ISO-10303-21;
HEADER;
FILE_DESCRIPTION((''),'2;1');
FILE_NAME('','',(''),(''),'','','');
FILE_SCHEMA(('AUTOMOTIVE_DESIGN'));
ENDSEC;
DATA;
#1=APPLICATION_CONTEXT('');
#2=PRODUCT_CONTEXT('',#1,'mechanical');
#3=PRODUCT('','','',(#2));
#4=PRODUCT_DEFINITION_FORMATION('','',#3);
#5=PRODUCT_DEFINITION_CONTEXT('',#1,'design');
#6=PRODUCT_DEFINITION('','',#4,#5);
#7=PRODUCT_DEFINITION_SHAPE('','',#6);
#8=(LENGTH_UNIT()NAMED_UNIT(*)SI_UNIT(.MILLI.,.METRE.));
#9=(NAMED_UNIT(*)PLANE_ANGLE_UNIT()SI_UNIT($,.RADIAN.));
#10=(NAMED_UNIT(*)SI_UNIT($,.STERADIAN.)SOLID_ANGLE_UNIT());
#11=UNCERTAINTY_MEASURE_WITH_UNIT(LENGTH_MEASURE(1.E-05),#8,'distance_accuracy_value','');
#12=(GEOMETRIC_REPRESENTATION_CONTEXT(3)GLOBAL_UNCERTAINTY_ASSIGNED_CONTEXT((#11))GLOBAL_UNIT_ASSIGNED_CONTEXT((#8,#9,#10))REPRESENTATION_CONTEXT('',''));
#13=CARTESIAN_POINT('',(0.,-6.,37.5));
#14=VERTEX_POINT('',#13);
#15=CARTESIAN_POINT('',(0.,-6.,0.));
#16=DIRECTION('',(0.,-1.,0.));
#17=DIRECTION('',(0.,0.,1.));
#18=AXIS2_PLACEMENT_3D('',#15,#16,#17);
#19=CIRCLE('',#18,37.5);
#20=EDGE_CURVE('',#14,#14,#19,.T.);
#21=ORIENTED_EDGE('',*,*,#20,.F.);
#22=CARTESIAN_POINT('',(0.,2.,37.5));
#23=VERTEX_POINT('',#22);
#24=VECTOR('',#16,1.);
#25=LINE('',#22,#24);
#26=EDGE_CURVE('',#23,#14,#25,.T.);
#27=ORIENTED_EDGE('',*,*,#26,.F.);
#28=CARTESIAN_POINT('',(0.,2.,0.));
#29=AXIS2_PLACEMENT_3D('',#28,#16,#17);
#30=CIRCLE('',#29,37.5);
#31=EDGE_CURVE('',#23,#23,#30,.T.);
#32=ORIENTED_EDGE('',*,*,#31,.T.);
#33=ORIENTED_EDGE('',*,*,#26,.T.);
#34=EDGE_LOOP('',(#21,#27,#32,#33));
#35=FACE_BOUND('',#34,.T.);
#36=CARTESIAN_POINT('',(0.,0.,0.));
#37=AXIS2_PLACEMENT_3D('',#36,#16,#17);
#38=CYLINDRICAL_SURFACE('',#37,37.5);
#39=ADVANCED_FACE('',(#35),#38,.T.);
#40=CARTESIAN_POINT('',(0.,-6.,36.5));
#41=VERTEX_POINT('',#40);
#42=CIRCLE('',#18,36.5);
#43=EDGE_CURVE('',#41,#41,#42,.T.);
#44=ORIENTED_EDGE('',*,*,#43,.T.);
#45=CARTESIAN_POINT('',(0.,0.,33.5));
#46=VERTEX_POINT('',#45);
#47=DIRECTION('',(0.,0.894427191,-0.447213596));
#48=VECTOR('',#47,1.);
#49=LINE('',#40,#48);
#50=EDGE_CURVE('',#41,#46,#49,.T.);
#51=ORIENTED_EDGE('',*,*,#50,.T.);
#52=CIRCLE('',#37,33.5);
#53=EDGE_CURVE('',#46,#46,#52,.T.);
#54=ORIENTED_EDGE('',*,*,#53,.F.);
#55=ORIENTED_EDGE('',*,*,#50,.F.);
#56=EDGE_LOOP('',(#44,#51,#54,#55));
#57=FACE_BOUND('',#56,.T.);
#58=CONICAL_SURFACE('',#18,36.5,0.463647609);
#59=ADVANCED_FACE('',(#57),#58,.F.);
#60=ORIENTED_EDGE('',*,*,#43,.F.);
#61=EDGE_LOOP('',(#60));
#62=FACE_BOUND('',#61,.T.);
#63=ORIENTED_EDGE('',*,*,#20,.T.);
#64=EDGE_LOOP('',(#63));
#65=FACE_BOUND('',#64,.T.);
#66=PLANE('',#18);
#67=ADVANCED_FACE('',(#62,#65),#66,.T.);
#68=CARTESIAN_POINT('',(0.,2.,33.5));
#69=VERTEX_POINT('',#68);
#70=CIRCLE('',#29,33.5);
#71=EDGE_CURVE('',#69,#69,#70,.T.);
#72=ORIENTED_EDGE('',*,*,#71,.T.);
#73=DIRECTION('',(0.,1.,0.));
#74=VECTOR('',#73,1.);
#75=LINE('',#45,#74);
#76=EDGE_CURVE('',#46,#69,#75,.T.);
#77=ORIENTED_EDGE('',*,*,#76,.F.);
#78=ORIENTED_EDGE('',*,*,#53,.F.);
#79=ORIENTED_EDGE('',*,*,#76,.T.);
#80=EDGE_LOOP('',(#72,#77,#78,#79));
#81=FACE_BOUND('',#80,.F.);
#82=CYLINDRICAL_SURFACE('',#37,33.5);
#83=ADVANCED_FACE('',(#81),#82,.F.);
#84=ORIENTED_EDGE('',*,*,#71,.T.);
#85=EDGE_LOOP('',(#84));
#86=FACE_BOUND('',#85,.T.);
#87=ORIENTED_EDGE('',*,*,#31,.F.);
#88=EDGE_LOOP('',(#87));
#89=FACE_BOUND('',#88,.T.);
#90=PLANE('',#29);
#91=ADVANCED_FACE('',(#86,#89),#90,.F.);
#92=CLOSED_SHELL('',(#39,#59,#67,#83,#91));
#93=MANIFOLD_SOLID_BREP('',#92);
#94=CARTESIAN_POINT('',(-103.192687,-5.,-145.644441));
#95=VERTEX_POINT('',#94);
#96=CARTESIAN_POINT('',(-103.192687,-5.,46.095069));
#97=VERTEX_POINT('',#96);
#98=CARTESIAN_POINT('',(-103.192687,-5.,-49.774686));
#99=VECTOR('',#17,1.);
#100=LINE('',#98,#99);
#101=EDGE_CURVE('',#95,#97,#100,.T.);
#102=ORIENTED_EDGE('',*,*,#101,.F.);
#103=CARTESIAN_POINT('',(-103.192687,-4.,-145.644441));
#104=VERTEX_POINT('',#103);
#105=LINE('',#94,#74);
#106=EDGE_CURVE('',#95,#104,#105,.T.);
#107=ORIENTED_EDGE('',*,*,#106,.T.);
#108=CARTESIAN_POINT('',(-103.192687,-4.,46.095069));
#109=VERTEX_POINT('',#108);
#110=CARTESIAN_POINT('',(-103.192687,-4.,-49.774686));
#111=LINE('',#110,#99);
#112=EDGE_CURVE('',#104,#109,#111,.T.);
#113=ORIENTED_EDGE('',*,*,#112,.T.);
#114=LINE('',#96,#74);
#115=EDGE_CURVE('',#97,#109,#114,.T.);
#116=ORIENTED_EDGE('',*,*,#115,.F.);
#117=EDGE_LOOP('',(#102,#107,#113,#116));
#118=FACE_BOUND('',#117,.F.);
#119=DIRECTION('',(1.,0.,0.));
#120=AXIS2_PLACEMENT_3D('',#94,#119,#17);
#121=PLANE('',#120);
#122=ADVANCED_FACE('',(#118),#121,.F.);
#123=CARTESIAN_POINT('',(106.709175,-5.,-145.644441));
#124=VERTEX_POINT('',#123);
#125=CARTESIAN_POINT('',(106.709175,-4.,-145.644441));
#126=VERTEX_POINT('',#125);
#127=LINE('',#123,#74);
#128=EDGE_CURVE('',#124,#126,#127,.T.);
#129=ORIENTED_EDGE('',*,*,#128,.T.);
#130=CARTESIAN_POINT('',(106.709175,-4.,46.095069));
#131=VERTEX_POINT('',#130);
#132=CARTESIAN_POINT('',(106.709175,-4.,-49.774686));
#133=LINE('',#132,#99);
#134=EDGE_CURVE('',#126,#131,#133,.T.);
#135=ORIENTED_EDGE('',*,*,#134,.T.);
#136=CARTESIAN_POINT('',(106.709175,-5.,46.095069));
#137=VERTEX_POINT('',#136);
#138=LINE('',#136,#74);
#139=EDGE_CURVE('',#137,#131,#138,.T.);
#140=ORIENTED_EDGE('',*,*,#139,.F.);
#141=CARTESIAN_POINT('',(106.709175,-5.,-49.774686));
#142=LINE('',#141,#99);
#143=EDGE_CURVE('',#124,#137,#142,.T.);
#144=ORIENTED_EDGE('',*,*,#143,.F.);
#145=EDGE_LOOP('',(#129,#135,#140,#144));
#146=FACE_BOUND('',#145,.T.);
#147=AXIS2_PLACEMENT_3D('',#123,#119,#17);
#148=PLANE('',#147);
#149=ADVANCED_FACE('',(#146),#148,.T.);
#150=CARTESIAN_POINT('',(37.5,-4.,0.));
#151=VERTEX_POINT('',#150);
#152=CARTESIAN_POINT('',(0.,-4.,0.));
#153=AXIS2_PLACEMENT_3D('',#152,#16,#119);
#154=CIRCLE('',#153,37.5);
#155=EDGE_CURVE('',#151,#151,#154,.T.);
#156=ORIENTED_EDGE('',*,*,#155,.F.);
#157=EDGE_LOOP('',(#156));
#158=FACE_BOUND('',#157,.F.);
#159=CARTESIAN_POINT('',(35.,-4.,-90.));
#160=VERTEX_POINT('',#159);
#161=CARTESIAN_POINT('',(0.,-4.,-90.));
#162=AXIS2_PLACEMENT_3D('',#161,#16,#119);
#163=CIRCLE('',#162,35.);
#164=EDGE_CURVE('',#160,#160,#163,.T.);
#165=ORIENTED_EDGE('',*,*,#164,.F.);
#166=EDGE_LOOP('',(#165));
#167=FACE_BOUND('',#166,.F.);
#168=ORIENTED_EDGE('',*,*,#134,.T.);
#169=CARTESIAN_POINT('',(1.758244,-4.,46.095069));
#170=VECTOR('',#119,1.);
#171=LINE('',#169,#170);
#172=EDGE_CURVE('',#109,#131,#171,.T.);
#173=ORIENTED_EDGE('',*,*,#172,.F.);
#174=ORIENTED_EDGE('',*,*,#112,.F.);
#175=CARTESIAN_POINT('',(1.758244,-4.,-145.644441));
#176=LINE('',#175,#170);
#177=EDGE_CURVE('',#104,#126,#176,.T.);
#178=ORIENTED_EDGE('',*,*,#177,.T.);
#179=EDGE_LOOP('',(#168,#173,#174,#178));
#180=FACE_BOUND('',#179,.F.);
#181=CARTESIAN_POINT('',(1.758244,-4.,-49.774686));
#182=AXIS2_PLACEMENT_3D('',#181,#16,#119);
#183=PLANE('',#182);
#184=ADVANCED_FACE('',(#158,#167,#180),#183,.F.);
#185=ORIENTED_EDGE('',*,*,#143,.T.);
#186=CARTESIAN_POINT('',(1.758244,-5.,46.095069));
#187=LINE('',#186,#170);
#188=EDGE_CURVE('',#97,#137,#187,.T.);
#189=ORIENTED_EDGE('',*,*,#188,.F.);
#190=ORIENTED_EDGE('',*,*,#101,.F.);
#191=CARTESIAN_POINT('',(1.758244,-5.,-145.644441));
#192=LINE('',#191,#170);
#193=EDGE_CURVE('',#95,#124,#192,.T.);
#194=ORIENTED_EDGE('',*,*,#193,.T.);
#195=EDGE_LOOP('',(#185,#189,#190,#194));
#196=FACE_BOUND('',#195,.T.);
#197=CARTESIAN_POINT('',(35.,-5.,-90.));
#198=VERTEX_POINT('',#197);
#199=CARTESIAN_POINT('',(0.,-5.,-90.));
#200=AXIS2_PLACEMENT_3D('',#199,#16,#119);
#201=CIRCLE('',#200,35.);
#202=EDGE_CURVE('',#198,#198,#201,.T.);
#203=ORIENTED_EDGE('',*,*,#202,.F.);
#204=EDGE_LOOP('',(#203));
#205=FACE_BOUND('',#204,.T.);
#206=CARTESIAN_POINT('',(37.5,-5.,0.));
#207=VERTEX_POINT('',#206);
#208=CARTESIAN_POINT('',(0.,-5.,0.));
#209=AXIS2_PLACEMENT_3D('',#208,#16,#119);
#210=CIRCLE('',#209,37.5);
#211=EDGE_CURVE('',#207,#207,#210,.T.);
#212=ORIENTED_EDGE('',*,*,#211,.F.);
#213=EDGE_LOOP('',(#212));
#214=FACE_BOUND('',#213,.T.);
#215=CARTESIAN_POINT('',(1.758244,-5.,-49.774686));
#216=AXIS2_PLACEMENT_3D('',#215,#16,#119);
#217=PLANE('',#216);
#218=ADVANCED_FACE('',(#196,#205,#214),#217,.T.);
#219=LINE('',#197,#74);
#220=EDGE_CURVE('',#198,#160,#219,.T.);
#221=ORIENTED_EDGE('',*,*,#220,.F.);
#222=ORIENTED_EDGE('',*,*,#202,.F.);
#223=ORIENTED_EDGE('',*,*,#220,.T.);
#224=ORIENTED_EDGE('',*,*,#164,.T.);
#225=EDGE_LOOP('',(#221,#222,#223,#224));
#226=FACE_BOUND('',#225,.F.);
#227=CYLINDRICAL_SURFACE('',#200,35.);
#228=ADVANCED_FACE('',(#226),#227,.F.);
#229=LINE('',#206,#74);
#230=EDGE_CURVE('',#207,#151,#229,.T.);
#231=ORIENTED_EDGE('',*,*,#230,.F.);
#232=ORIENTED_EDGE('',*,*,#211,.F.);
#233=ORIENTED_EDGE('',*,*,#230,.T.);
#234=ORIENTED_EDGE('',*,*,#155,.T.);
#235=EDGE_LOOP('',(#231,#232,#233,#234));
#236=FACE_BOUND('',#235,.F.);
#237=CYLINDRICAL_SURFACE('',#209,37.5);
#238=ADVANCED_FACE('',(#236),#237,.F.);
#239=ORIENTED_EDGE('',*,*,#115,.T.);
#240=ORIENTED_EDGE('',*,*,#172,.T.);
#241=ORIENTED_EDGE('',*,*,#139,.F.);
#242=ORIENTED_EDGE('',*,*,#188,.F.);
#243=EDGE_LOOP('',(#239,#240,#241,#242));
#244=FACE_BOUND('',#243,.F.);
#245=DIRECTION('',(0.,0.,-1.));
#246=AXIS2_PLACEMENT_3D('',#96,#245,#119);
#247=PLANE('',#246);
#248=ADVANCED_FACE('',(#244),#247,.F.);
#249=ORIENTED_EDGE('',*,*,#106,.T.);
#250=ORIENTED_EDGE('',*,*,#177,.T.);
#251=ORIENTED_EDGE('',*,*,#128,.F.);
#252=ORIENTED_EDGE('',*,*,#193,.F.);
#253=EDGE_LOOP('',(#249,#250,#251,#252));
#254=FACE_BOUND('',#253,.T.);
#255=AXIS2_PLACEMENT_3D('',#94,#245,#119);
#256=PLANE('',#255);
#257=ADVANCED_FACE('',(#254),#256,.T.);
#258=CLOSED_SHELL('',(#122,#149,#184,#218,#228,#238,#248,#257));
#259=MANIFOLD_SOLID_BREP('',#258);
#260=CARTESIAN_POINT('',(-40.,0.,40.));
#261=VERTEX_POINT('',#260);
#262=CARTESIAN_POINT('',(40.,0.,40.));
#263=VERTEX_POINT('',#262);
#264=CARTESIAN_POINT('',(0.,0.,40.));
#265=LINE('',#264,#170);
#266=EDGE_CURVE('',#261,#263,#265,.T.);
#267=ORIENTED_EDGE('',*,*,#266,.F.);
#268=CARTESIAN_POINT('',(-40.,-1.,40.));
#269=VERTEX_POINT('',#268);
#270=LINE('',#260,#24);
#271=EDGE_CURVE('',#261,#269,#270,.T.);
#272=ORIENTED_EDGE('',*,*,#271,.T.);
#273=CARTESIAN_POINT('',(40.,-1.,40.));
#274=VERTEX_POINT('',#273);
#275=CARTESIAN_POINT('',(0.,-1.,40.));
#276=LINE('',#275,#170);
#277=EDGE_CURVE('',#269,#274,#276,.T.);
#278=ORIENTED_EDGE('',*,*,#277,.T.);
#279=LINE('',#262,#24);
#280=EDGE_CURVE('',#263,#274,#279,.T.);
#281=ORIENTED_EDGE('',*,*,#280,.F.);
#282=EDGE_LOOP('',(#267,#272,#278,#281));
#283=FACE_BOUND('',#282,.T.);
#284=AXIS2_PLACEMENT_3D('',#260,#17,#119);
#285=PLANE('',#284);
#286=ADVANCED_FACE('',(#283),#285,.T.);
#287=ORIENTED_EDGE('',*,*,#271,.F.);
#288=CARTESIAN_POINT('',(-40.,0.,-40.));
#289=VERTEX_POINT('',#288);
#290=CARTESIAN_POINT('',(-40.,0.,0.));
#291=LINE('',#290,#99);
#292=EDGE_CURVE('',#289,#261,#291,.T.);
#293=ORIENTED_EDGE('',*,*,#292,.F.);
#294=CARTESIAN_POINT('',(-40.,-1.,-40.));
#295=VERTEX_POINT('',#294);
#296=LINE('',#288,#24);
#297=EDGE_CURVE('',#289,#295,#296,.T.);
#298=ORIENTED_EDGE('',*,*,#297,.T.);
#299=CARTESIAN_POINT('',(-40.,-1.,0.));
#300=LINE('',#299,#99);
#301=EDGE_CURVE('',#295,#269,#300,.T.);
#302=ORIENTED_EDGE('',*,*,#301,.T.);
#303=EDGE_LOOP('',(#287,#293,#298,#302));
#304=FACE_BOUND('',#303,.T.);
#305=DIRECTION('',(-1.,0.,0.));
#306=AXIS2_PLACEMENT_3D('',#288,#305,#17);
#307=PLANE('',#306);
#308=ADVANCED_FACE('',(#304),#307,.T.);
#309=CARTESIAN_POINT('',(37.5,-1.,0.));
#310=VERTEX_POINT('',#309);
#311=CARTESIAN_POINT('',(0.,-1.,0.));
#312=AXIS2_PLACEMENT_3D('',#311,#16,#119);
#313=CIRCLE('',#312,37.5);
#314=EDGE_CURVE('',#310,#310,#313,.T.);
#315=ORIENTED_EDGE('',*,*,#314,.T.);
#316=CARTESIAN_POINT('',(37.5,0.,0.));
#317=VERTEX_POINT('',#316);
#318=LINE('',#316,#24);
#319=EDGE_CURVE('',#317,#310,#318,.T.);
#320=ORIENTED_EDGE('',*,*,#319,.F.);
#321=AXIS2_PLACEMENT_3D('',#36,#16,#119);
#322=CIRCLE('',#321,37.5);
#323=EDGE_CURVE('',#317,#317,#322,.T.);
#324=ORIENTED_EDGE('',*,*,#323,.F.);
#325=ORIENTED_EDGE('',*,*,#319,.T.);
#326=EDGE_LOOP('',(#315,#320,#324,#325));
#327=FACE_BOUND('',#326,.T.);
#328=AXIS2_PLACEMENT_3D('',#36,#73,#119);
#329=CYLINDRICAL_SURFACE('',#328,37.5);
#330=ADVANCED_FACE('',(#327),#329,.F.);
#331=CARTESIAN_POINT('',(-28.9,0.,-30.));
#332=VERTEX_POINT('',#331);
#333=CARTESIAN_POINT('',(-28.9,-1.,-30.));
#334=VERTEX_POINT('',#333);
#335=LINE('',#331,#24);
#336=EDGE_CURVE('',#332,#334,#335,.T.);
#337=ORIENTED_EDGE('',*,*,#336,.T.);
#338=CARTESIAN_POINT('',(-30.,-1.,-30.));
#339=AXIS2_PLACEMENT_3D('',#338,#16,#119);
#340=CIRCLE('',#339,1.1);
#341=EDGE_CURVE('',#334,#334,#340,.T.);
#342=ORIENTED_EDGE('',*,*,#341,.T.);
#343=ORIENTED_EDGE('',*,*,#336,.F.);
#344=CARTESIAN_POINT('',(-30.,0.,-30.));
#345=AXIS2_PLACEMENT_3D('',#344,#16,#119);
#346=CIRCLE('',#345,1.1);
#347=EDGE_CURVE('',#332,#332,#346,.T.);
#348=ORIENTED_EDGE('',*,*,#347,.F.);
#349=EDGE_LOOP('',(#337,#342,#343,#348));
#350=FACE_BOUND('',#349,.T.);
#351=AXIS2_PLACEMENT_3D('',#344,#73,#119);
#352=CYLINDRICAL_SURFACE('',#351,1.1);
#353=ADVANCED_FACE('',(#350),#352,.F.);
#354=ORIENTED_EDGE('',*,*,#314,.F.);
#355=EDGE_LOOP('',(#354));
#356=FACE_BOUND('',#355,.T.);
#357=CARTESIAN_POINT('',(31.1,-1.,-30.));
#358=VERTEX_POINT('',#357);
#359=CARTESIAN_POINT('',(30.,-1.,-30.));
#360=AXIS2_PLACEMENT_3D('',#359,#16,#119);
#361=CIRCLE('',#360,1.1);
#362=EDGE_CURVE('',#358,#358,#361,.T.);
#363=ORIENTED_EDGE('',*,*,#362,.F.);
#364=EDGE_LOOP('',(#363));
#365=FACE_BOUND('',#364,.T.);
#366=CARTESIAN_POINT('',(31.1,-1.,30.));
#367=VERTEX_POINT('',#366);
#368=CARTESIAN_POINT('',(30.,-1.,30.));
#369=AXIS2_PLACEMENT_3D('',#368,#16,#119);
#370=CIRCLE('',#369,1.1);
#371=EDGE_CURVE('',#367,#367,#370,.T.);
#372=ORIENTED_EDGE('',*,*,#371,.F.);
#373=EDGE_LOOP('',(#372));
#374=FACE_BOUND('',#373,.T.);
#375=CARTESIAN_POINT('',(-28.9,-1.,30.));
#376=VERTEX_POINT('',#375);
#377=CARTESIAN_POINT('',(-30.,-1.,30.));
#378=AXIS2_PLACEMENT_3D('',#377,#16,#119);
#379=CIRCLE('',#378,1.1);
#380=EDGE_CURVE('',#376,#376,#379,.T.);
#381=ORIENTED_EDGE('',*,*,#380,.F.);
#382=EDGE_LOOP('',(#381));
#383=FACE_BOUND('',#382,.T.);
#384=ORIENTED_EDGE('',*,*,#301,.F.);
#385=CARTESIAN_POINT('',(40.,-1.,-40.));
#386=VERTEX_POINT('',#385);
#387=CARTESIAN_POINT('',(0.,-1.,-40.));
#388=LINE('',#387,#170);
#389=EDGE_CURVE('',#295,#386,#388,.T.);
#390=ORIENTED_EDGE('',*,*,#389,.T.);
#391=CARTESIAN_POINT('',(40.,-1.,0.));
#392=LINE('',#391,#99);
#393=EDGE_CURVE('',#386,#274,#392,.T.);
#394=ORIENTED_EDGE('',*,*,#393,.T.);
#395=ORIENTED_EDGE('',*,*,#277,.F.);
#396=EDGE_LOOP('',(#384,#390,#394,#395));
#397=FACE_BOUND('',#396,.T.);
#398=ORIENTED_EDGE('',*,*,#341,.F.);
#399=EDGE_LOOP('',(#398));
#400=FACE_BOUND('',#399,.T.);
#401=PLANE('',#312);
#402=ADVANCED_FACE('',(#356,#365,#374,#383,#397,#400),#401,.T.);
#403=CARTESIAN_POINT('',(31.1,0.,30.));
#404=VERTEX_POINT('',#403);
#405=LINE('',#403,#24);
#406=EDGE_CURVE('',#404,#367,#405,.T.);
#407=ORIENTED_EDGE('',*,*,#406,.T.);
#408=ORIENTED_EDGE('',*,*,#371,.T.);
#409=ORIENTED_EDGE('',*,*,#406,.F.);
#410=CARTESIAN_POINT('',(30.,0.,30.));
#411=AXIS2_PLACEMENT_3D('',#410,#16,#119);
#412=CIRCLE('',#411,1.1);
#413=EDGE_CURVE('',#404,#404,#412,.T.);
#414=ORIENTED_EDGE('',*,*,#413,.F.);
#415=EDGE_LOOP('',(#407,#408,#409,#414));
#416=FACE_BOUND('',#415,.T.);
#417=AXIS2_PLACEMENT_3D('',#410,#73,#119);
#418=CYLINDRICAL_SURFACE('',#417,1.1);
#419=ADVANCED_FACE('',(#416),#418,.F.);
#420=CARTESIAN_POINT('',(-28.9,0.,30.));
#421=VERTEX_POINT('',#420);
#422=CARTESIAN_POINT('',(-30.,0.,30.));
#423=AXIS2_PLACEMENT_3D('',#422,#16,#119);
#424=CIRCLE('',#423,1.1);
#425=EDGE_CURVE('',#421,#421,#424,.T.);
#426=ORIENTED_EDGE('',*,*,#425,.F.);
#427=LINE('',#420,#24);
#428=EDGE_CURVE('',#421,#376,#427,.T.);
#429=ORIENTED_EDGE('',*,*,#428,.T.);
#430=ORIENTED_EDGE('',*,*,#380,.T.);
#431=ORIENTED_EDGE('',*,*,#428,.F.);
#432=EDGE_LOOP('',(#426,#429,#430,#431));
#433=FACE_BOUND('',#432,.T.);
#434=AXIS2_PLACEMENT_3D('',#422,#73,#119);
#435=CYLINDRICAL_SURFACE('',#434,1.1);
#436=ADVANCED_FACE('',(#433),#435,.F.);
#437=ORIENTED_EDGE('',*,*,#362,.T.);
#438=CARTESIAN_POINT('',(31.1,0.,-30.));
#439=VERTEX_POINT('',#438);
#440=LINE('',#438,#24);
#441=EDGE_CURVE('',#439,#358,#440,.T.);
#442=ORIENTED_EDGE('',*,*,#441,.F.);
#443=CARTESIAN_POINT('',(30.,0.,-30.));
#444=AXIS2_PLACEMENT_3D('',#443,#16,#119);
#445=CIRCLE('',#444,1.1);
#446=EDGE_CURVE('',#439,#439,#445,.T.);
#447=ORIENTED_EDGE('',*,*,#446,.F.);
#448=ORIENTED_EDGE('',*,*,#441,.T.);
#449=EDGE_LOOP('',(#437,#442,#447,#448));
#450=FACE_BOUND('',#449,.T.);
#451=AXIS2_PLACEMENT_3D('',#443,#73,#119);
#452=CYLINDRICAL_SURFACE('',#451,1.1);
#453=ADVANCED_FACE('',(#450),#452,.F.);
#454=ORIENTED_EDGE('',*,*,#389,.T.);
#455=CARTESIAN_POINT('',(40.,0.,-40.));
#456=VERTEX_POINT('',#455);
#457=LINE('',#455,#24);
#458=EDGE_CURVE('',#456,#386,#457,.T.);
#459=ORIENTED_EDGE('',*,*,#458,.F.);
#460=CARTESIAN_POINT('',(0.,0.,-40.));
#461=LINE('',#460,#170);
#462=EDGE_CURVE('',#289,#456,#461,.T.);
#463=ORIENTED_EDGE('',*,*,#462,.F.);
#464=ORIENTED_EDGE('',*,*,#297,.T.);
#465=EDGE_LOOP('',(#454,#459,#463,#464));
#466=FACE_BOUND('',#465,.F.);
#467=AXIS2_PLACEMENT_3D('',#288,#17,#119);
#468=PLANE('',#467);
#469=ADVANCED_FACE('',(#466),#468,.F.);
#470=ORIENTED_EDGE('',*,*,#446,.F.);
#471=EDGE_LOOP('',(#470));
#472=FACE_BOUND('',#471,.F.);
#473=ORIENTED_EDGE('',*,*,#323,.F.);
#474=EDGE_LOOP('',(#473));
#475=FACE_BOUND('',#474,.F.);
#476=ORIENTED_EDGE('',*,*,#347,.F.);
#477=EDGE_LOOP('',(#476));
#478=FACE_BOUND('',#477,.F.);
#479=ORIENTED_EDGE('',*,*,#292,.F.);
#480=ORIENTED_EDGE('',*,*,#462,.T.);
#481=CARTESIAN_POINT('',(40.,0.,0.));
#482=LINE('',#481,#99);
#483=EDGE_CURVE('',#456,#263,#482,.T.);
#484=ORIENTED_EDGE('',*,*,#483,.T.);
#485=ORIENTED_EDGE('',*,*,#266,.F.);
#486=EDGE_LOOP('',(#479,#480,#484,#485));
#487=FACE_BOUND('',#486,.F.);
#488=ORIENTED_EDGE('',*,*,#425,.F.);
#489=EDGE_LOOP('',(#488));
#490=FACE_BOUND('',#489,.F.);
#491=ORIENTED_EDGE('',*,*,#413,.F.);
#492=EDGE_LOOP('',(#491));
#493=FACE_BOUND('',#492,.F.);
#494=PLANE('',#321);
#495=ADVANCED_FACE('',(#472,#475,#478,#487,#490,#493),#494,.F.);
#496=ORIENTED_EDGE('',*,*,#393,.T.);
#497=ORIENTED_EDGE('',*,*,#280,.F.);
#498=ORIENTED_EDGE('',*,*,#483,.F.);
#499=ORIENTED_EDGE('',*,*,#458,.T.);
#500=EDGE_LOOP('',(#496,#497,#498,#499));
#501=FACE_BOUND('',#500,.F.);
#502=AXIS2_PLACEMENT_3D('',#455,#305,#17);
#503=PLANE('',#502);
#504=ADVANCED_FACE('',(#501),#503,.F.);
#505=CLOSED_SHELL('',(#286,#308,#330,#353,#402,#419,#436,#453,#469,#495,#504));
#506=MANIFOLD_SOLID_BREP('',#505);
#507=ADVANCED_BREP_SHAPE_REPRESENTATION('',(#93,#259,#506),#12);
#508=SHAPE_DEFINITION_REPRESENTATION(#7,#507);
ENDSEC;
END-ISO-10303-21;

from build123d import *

# Parameters (mm, degrees)
F1_W     = 209.9018618464
F1_H     = 191.7395107448
F1_R     = 35
F1_R_2   = 37.5
F2_DEPTH = 1
F5_W     = 80
F5_H     = 80
F5_R     = 1.1
F5_R_2   = 37.5
F6_DEPTH = 1
F7_DEPTH = 2


with BuildPart() as f2:
    # F1 (on offset) → F2 (new body)
    with BuildSketch(Plane.XZ.offset(5)):
        with Locations((1.7582438886, -49.7746858746)):
            Rectangle(F1_W, F1_H)
        with Locations((0, -90)):
            Circle(F1_R, mode=Mode.SUBTRACT)
        Circle(F1_R_2, mode=Mode.SUBTRACT)
    extrude(amount=-F2_DEPTH)


with BuildPart() as f4:
    # F3 (on Right) → F4 (revolve)
    with BuildSketch(Plane.YZ):
        Polygon((0, 37.5), (-6, 37.5), (-6, 36.5), (0, 33.5), align=None)
    revolve(axis=Axis((0, 1.602868408, 0), (0, -1, 0)))

    # F7 (add): a face of the model
    f7_faces = [f4.faces().sort_by_distance(p)[0] for p in [
        (0, 0, -34.5606601718),
    ]]
    extrude(f7_faces, amount=F7_DEPTH)


with BuildPart() as f6:
    # F5 (on Front) → F6 (new body)
    with BuildSketch(Plane.XZ):
        Rectangle(F5_W, F5_H)
        with Locations((-30, -30)):
            Circle(F5_R, mode=Mode.SUBTRACT)
        with Locations((30, -30)):
            Circle(F5_R, mode=Mode.SUBTRACT)
        with Locations((-30, 30)):
            Circle(F5_R, mode=Mode.SUBTRACT)
        Circle(F5_R_2, mode=Mode.SUBTRACT)
        with Locations((30, 30)):
            Circle(F5_R, mode=Mode.SUBTRACT)
    extrude(amount=F6_DEPTH)


solid = Compound([f2.part, f4.part, f6.part])
